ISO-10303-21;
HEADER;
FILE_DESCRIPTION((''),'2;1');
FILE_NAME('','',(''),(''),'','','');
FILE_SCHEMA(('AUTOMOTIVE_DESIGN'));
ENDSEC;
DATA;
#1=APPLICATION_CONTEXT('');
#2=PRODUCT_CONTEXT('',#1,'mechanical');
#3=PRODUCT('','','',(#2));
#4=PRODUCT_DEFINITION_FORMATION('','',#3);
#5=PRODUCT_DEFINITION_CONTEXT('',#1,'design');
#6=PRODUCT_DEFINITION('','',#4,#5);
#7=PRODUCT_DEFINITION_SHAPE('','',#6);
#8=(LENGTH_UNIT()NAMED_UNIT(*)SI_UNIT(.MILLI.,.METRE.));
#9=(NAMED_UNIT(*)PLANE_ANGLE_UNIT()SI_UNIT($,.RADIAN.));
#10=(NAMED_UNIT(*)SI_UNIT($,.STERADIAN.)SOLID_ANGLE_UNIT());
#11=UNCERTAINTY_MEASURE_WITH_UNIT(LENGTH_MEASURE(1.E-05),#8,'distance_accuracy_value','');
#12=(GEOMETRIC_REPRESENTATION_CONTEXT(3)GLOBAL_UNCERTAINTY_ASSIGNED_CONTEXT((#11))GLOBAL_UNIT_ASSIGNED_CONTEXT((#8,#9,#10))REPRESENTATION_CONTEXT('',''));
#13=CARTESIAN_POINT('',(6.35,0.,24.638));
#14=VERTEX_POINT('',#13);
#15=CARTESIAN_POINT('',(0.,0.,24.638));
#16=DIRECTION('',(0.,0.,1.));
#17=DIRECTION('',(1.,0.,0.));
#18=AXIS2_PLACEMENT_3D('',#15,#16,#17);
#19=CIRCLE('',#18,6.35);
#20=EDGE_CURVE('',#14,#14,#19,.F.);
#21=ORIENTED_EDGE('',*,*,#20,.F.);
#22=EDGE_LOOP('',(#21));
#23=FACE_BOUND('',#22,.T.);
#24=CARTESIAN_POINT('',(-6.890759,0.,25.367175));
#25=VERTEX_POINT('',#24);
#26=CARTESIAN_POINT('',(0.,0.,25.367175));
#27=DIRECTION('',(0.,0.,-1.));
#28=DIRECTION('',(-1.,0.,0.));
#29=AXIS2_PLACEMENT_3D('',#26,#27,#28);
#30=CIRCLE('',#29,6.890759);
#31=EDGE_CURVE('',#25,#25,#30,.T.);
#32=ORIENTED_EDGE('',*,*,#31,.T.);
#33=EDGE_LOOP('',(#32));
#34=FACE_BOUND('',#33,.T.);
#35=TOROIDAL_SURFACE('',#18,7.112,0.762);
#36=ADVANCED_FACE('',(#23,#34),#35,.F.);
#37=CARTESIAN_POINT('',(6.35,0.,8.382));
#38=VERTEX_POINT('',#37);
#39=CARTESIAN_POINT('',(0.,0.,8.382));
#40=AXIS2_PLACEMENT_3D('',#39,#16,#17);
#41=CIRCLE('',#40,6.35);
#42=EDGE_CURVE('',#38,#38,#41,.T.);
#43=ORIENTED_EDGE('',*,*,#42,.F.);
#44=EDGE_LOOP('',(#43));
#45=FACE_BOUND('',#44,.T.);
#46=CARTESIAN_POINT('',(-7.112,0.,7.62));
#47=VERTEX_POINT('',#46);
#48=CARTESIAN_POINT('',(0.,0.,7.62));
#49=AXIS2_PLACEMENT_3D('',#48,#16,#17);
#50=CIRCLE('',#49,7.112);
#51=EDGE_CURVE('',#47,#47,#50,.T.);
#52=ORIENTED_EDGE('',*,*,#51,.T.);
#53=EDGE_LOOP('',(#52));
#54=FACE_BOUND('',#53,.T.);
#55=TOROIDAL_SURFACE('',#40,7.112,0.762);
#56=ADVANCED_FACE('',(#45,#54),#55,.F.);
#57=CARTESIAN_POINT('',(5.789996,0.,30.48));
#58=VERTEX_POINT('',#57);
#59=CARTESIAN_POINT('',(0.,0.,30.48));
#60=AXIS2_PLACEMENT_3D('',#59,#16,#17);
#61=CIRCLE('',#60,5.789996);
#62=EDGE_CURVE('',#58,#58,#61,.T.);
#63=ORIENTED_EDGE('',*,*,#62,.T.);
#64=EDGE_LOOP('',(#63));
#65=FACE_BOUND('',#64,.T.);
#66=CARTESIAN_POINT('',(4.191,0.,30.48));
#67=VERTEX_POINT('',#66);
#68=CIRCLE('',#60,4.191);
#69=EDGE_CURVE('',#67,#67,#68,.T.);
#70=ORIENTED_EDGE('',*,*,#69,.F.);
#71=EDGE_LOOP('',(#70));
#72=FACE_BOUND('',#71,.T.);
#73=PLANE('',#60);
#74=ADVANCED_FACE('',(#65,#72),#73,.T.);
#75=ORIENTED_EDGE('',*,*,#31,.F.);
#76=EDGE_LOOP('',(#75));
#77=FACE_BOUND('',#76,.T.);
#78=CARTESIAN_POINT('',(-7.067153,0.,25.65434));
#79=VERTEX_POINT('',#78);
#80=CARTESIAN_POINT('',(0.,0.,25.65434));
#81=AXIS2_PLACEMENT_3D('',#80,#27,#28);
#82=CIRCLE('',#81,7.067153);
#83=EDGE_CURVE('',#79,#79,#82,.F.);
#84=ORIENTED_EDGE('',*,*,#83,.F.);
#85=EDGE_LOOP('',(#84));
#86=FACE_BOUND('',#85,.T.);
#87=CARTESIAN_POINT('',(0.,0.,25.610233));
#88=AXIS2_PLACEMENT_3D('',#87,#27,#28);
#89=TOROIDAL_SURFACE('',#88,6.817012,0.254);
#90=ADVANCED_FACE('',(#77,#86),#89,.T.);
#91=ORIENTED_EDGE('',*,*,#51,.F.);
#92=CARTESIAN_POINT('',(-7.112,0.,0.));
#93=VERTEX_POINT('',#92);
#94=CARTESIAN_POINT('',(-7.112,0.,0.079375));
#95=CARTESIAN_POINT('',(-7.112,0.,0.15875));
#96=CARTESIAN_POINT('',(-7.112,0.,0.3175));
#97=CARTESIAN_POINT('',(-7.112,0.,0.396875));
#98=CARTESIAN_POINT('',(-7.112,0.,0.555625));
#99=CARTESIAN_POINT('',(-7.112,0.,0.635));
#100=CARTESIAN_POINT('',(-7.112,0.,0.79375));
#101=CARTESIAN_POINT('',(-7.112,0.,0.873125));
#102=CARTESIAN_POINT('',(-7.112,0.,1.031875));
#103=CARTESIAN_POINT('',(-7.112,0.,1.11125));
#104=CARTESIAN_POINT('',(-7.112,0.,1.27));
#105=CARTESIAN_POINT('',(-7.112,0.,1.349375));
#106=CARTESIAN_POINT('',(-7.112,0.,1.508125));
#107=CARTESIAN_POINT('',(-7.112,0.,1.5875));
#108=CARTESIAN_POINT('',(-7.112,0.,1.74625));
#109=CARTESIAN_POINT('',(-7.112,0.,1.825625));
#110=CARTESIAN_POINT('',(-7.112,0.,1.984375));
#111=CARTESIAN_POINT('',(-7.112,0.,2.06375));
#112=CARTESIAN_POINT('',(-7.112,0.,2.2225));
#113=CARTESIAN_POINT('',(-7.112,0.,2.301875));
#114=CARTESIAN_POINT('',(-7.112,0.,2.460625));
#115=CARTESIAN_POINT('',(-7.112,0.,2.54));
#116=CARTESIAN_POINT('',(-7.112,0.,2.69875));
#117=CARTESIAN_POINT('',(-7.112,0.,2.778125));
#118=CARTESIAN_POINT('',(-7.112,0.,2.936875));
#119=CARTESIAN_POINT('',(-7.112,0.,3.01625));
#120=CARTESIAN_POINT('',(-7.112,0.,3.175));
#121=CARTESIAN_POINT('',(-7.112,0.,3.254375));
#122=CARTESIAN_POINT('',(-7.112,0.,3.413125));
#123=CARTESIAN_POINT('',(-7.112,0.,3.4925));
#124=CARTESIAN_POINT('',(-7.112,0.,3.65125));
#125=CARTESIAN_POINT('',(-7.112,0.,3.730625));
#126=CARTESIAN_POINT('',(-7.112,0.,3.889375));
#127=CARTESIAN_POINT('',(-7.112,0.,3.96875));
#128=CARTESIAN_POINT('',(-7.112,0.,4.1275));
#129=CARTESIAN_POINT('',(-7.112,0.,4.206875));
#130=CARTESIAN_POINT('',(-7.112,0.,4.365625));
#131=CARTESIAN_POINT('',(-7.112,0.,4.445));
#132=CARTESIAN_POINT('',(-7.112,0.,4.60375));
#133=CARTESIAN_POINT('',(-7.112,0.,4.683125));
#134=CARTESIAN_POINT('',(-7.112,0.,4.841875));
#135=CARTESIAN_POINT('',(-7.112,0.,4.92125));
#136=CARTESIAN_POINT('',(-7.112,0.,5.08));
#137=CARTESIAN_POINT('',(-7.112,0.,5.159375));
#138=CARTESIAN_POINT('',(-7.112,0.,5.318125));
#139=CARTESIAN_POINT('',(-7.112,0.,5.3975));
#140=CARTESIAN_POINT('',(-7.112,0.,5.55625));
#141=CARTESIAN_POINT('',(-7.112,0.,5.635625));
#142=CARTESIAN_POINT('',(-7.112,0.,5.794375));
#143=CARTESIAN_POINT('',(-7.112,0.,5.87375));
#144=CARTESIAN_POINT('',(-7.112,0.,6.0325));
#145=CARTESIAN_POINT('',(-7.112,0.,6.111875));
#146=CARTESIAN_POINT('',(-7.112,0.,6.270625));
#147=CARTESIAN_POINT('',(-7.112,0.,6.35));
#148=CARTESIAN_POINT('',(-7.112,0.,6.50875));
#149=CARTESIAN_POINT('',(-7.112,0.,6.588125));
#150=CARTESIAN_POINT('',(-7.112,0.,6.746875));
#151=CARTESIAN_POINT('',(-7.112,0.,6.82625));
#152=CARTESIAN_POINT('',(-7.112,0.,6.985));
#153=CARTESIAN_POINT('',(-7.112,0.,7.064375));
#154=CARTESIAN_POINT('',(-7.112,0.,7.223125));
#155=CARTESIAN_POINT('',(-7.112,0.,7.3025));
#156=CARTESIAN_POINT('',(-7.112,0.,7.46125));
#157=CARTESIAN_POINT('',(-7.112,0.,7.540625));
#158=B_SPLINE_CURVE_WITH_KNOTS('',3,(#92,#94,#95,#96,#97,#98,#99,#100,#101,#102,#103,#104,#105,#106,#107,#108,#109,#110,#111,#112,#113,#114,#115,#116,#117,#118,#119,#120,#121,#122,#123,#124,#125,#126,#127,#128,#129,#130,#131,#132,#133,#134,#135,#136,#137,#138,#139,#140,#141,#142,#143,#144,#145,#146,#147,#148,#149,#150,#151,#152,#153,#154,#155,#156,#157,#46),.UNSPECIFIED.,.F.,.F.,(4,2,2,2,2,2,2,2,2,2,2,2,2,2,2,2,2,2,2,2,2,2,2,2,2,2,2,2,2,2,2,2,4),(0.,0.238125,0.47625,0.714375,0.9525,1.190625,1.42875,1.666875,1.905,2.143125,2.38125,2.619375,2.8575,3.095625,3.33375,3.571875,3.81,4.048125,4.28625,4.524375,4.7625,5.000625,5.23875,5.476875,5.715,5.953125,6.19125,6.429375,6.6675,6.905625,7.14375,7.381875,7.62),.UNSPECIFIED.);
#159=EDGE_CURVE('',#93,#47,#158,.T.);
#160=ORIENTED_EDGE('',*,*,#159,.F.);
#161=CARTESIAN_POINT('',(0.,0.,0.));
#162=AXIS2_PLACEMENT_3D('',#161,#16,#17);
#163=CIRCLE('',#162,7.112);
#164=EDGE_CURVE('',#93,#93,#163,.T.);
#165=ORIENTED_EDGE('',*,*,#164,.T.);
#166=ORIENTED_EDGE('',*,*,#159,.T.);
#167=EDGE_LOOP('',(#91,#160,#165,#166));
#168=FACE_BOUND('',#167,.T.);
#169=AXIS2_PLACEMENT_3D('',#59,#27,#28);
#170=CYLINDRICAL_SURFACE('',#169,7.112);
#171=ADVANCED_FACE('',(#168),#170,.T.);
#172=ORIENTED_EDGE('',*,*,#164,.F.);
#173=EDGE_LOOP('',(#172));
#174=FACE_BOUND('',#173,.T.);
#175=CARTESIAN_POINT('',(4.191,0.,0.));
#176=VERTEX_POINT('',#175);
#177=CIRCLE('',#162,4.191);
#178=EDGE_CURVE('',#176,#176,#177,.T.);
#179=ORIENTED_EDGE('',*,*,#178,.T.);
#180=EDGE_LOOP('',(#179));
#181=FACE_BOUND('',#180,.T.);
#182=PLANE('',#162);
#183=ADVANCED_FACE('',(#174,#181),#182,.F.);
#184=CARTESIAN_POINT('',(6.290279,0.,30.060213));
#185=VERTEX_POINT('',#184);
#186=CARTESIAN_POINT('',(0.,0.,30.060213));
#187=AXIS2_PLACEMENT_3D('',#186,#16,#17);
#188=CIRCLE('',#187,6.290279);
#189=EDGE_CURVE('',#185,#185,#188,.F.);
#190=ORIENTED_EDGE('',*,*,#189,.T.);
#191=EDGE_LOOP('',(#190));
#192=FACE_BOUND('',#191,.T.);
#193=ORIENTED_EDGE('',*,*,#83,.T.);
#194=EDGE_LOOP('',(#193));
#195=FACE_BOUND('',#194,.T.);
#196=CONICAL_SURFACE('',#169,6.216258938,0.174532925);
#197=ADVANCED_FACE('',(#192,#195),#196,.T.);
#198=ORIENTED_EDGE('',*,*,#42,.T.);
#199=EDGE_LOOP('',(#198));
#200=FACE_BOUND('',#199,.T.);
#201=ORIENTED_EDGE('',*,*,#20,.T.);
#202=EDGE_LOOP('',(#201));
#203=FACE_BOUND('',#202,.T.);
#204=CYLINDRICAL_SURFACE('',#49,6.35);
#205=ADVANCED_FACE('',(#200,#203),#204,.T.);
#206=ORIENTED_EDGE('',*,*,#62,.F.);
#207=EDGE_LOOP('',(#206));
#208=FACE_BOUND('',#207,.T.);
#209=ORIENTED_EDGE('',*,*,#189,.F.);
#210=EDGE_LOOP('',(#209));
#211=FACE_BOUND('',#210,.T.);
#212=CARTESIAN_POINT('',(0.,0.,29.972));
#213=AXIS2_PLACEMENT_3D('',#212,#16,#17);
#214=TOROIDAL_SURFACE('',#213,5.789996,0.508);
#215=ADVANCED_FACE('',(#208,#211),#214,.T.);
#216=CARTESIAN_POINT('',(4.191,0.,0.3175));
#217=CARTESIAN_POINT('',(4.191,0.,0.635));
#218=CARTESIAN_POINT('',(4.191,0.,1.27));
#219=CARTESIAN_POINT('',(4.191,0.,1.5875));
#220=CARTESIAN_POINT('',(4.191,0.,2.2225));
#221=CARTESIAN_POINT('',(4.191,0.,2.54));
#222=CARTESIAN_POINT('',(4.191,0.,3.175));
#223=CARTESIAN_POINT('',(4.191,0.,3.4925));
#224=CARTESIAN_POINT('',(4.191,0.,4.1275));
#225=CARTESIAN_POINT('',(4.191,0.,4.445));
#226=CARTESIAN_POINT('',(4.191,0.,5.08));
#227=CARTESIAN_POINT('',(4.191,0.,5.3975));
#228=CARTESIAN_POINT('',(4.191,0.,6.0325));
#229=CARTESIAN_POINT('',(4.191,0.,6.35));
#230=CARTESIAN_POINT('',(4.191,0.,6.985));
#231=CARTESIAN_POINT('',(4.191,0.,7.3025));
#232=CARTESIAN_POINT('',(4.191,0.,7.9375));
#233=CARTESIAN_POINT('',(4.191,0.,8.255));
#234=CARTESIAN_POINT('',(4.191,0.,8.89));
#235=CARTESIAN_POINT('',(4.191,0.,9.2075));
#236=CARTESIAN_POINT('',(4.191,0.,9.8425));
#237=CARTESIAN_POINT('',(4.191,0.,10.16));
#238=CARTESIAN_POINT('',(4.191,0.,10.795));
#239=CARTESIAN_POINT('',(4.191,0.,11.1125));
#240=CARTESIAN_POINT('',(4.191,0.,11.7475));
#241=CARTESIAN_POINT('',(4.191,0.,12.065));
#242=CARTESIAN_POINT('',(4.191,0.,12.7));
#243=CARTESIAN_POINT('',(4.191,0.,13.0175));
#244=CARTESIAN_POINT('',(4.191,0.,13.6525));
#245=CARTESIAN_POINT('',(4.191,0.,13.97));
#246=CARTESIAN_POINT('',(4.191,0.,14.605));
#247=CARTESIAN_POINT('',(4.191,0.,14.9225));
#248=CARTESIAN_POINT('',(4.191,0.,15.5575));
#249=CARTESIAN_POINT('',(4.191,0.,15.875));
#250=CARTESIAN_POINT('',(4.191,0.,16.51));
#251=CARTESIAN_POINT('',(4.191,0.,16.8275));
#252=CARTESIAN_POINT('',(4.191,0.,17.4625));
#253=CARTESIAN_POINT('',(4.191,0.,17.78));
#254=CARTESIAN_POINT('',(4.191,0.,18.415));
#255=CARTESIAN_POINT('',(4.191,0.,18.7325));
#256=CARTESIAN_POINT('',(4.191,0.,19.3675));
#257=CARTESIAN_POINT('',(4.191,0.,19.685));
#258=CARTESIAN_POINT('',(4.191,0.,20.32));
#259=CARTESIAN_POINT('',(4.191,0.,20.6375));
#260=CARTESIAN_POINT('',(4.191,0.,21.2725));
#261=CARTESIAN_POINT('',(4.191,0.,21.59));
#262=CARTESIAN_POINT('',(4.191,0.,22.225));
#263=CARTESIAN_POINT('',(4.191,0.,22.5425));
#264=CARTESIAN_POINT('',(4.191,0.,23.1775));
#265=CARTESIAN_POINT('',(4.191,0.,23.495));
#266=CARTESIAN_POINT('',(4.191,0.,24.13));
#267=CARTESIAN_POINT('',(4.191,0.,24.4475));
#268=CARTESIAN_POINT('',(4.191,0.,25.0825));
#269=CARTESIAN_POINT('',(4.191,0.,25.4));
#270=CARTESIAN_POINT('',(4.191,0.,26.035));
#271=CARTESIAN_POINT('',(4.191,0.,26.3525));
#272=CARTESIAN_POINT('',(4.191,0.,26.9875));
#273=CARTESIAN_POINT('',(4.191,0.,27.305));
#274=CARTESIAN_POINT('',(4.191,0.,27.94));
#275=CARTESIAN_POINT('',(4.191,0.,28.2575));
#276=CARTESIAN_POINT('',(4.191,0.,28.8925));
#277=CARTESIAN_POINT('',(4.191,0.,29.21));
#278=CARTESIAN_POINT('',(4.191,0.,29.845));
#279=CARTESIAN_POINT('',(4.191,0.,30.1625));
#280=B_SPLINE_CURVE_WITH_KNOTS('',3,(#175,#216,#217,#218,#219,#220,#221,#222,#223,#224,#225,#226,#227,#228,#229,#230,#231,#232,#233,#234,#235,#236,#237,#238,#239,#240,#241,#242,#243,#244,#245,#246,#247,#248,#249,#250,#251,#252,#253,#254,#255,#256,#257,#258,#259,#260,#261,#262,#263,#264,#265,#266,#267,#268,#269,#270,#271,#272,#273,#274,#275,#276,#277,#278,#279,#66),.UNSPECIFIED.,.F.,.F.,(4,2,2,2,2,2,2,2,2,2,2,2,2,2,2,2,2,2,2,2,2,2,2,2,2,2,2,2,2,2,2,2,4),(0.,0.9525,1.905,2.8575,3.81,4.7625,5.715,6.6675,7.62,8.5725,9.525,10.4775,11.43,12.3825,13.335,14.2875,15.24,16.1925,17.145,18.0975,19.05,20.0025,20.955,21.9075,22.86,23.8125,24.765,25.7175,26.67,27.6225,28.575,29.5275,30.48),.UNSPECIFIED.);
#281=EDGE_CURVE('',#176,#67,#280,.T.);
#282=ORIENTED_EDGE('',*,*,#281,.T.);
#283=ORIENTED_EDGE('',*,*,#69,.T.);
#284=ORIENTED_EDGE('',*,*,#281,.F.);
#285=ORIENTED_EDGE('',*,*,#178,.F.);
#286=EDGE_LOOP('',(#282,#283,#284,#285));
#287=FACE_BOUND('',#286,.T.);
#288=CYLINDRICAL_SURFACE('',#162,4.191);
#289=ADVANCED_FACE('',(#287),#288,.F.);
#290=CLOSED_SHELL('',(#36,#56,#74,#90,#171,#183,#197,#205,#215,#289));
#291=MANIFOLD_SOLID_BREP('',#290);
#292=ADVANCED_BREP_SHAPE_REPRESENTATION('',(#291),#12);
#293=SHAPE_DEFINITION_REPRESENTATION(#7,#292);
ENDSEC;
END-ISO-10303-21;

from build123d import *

# Parameters (mm, degrees)
SKETCH1_R           = 7.112
BOSS_EXTRUDE1_DEPTH = 30.48
SKETCH2_R           = 4.191
CUT_EXTRUDE1_DEPTH  = 30.48
CUT_EXTRUDE2_START  = -5.08
SKETCH3_R           = 7.874
SKETCH3_R_2         = 6.35
CUT_EXTRUDE2_DEPTH  = 17.78
FILLET1_R           = 0.762
FILLET2_R           = 0.762
CHAMFER1_SIZE       = 5.08
CHAMFER1_SIZE_2     = 0.895741062
FILLET3_R           = 0.508
FILLET4_R           = 0.254


# Some blends are built 0.0001 mm under size
with BuildPart() as part:
    # Sketch1 → Boss-Extrude1 (new body)
    with BuildSketch(Plane.XY):
        with Locations(Location((0, 0, 0), (0, 0, 180))):
            Circle(SKETCH1_R)
    extrude(amount=BOSS_EXTRUDE1_DEPTH)

    # Sketch2 → Cut-Extrude1 (cut)
    with BuildSketch(Plane.XY.offset(30.48)):
        Circle(SKETCH2_R)
    extrude(amount=-CUT_EXTRUDE1_DEPTH, mode=Mode.SUBTRACT)

    # Sketch3 → Cut-Extrude2 (cut)
    with BuildSketch(Plane.XY.offset(30.48).offset(CUT_EXTRUDE2_START)):
        Circle(SKETCH3_R)
        Circle(SKETCH3_R_2, mode=Mode.SUBTRACT)
    extrude(amount=-CUT_EXTRUDE2_DEPTH, mode=Mode.SUBTRACT)

    # Fillet1
    fillet1_edges = [part.edges().sort_by_distance(p)[0] for p in [
        (-6.35, 0, 7.62),
    ]]
    fillet(fillet1_edges, radius=FILLET1_R - 0.0001)  # a hair under: the kernel refuses the full size

    # Fillet2
    fillet2_edges = [part.edges().sort_by_distance(p)[0] for p in [
        (-6.35, 0, 25.4),
    ]]
    fillet(fillet2_edges, radius=FILLET2_R - 0.0001)  # a hair under: the kernel refuses the full size

    # Chamfer1
    # the kernel refuses this chamfer: 5.08, 0.895741062 mm, written as the material it takes off along each edge
    with BuildSketch(Plane(origin=(0, 0, 30.48), x_dir=(-1, 0, 0), z_dir=(0, 1, 0))) as chamfer1_piece_1:
        Polygon((7.112, -CHAMFER1_SIZE), (7.112 - CHAMFER1_SIZE_2, 0), (7.112, 0), align=None)
    revolve(axis=Axis((0, 0, 30.48), (0, 0, 1)), mode=Mode.SUBTRACT)

    # Fillet3
    fillet3_edges = [part.edges().sort_by_distance(p)[0] for p in [
        (6.216258938, 0, 30.48),
    ]]
    fillet(fillet3_edges, radius=FILLET3_R)

    # Fillet4
    fillet4_edges = [part.edges().sort_by_distance(p)[0] for p in [
        (7.112, 0, 25.4),
    ]]
    fillet(fillet4_edges, radius=FILLET4_R)


solid = part.part
